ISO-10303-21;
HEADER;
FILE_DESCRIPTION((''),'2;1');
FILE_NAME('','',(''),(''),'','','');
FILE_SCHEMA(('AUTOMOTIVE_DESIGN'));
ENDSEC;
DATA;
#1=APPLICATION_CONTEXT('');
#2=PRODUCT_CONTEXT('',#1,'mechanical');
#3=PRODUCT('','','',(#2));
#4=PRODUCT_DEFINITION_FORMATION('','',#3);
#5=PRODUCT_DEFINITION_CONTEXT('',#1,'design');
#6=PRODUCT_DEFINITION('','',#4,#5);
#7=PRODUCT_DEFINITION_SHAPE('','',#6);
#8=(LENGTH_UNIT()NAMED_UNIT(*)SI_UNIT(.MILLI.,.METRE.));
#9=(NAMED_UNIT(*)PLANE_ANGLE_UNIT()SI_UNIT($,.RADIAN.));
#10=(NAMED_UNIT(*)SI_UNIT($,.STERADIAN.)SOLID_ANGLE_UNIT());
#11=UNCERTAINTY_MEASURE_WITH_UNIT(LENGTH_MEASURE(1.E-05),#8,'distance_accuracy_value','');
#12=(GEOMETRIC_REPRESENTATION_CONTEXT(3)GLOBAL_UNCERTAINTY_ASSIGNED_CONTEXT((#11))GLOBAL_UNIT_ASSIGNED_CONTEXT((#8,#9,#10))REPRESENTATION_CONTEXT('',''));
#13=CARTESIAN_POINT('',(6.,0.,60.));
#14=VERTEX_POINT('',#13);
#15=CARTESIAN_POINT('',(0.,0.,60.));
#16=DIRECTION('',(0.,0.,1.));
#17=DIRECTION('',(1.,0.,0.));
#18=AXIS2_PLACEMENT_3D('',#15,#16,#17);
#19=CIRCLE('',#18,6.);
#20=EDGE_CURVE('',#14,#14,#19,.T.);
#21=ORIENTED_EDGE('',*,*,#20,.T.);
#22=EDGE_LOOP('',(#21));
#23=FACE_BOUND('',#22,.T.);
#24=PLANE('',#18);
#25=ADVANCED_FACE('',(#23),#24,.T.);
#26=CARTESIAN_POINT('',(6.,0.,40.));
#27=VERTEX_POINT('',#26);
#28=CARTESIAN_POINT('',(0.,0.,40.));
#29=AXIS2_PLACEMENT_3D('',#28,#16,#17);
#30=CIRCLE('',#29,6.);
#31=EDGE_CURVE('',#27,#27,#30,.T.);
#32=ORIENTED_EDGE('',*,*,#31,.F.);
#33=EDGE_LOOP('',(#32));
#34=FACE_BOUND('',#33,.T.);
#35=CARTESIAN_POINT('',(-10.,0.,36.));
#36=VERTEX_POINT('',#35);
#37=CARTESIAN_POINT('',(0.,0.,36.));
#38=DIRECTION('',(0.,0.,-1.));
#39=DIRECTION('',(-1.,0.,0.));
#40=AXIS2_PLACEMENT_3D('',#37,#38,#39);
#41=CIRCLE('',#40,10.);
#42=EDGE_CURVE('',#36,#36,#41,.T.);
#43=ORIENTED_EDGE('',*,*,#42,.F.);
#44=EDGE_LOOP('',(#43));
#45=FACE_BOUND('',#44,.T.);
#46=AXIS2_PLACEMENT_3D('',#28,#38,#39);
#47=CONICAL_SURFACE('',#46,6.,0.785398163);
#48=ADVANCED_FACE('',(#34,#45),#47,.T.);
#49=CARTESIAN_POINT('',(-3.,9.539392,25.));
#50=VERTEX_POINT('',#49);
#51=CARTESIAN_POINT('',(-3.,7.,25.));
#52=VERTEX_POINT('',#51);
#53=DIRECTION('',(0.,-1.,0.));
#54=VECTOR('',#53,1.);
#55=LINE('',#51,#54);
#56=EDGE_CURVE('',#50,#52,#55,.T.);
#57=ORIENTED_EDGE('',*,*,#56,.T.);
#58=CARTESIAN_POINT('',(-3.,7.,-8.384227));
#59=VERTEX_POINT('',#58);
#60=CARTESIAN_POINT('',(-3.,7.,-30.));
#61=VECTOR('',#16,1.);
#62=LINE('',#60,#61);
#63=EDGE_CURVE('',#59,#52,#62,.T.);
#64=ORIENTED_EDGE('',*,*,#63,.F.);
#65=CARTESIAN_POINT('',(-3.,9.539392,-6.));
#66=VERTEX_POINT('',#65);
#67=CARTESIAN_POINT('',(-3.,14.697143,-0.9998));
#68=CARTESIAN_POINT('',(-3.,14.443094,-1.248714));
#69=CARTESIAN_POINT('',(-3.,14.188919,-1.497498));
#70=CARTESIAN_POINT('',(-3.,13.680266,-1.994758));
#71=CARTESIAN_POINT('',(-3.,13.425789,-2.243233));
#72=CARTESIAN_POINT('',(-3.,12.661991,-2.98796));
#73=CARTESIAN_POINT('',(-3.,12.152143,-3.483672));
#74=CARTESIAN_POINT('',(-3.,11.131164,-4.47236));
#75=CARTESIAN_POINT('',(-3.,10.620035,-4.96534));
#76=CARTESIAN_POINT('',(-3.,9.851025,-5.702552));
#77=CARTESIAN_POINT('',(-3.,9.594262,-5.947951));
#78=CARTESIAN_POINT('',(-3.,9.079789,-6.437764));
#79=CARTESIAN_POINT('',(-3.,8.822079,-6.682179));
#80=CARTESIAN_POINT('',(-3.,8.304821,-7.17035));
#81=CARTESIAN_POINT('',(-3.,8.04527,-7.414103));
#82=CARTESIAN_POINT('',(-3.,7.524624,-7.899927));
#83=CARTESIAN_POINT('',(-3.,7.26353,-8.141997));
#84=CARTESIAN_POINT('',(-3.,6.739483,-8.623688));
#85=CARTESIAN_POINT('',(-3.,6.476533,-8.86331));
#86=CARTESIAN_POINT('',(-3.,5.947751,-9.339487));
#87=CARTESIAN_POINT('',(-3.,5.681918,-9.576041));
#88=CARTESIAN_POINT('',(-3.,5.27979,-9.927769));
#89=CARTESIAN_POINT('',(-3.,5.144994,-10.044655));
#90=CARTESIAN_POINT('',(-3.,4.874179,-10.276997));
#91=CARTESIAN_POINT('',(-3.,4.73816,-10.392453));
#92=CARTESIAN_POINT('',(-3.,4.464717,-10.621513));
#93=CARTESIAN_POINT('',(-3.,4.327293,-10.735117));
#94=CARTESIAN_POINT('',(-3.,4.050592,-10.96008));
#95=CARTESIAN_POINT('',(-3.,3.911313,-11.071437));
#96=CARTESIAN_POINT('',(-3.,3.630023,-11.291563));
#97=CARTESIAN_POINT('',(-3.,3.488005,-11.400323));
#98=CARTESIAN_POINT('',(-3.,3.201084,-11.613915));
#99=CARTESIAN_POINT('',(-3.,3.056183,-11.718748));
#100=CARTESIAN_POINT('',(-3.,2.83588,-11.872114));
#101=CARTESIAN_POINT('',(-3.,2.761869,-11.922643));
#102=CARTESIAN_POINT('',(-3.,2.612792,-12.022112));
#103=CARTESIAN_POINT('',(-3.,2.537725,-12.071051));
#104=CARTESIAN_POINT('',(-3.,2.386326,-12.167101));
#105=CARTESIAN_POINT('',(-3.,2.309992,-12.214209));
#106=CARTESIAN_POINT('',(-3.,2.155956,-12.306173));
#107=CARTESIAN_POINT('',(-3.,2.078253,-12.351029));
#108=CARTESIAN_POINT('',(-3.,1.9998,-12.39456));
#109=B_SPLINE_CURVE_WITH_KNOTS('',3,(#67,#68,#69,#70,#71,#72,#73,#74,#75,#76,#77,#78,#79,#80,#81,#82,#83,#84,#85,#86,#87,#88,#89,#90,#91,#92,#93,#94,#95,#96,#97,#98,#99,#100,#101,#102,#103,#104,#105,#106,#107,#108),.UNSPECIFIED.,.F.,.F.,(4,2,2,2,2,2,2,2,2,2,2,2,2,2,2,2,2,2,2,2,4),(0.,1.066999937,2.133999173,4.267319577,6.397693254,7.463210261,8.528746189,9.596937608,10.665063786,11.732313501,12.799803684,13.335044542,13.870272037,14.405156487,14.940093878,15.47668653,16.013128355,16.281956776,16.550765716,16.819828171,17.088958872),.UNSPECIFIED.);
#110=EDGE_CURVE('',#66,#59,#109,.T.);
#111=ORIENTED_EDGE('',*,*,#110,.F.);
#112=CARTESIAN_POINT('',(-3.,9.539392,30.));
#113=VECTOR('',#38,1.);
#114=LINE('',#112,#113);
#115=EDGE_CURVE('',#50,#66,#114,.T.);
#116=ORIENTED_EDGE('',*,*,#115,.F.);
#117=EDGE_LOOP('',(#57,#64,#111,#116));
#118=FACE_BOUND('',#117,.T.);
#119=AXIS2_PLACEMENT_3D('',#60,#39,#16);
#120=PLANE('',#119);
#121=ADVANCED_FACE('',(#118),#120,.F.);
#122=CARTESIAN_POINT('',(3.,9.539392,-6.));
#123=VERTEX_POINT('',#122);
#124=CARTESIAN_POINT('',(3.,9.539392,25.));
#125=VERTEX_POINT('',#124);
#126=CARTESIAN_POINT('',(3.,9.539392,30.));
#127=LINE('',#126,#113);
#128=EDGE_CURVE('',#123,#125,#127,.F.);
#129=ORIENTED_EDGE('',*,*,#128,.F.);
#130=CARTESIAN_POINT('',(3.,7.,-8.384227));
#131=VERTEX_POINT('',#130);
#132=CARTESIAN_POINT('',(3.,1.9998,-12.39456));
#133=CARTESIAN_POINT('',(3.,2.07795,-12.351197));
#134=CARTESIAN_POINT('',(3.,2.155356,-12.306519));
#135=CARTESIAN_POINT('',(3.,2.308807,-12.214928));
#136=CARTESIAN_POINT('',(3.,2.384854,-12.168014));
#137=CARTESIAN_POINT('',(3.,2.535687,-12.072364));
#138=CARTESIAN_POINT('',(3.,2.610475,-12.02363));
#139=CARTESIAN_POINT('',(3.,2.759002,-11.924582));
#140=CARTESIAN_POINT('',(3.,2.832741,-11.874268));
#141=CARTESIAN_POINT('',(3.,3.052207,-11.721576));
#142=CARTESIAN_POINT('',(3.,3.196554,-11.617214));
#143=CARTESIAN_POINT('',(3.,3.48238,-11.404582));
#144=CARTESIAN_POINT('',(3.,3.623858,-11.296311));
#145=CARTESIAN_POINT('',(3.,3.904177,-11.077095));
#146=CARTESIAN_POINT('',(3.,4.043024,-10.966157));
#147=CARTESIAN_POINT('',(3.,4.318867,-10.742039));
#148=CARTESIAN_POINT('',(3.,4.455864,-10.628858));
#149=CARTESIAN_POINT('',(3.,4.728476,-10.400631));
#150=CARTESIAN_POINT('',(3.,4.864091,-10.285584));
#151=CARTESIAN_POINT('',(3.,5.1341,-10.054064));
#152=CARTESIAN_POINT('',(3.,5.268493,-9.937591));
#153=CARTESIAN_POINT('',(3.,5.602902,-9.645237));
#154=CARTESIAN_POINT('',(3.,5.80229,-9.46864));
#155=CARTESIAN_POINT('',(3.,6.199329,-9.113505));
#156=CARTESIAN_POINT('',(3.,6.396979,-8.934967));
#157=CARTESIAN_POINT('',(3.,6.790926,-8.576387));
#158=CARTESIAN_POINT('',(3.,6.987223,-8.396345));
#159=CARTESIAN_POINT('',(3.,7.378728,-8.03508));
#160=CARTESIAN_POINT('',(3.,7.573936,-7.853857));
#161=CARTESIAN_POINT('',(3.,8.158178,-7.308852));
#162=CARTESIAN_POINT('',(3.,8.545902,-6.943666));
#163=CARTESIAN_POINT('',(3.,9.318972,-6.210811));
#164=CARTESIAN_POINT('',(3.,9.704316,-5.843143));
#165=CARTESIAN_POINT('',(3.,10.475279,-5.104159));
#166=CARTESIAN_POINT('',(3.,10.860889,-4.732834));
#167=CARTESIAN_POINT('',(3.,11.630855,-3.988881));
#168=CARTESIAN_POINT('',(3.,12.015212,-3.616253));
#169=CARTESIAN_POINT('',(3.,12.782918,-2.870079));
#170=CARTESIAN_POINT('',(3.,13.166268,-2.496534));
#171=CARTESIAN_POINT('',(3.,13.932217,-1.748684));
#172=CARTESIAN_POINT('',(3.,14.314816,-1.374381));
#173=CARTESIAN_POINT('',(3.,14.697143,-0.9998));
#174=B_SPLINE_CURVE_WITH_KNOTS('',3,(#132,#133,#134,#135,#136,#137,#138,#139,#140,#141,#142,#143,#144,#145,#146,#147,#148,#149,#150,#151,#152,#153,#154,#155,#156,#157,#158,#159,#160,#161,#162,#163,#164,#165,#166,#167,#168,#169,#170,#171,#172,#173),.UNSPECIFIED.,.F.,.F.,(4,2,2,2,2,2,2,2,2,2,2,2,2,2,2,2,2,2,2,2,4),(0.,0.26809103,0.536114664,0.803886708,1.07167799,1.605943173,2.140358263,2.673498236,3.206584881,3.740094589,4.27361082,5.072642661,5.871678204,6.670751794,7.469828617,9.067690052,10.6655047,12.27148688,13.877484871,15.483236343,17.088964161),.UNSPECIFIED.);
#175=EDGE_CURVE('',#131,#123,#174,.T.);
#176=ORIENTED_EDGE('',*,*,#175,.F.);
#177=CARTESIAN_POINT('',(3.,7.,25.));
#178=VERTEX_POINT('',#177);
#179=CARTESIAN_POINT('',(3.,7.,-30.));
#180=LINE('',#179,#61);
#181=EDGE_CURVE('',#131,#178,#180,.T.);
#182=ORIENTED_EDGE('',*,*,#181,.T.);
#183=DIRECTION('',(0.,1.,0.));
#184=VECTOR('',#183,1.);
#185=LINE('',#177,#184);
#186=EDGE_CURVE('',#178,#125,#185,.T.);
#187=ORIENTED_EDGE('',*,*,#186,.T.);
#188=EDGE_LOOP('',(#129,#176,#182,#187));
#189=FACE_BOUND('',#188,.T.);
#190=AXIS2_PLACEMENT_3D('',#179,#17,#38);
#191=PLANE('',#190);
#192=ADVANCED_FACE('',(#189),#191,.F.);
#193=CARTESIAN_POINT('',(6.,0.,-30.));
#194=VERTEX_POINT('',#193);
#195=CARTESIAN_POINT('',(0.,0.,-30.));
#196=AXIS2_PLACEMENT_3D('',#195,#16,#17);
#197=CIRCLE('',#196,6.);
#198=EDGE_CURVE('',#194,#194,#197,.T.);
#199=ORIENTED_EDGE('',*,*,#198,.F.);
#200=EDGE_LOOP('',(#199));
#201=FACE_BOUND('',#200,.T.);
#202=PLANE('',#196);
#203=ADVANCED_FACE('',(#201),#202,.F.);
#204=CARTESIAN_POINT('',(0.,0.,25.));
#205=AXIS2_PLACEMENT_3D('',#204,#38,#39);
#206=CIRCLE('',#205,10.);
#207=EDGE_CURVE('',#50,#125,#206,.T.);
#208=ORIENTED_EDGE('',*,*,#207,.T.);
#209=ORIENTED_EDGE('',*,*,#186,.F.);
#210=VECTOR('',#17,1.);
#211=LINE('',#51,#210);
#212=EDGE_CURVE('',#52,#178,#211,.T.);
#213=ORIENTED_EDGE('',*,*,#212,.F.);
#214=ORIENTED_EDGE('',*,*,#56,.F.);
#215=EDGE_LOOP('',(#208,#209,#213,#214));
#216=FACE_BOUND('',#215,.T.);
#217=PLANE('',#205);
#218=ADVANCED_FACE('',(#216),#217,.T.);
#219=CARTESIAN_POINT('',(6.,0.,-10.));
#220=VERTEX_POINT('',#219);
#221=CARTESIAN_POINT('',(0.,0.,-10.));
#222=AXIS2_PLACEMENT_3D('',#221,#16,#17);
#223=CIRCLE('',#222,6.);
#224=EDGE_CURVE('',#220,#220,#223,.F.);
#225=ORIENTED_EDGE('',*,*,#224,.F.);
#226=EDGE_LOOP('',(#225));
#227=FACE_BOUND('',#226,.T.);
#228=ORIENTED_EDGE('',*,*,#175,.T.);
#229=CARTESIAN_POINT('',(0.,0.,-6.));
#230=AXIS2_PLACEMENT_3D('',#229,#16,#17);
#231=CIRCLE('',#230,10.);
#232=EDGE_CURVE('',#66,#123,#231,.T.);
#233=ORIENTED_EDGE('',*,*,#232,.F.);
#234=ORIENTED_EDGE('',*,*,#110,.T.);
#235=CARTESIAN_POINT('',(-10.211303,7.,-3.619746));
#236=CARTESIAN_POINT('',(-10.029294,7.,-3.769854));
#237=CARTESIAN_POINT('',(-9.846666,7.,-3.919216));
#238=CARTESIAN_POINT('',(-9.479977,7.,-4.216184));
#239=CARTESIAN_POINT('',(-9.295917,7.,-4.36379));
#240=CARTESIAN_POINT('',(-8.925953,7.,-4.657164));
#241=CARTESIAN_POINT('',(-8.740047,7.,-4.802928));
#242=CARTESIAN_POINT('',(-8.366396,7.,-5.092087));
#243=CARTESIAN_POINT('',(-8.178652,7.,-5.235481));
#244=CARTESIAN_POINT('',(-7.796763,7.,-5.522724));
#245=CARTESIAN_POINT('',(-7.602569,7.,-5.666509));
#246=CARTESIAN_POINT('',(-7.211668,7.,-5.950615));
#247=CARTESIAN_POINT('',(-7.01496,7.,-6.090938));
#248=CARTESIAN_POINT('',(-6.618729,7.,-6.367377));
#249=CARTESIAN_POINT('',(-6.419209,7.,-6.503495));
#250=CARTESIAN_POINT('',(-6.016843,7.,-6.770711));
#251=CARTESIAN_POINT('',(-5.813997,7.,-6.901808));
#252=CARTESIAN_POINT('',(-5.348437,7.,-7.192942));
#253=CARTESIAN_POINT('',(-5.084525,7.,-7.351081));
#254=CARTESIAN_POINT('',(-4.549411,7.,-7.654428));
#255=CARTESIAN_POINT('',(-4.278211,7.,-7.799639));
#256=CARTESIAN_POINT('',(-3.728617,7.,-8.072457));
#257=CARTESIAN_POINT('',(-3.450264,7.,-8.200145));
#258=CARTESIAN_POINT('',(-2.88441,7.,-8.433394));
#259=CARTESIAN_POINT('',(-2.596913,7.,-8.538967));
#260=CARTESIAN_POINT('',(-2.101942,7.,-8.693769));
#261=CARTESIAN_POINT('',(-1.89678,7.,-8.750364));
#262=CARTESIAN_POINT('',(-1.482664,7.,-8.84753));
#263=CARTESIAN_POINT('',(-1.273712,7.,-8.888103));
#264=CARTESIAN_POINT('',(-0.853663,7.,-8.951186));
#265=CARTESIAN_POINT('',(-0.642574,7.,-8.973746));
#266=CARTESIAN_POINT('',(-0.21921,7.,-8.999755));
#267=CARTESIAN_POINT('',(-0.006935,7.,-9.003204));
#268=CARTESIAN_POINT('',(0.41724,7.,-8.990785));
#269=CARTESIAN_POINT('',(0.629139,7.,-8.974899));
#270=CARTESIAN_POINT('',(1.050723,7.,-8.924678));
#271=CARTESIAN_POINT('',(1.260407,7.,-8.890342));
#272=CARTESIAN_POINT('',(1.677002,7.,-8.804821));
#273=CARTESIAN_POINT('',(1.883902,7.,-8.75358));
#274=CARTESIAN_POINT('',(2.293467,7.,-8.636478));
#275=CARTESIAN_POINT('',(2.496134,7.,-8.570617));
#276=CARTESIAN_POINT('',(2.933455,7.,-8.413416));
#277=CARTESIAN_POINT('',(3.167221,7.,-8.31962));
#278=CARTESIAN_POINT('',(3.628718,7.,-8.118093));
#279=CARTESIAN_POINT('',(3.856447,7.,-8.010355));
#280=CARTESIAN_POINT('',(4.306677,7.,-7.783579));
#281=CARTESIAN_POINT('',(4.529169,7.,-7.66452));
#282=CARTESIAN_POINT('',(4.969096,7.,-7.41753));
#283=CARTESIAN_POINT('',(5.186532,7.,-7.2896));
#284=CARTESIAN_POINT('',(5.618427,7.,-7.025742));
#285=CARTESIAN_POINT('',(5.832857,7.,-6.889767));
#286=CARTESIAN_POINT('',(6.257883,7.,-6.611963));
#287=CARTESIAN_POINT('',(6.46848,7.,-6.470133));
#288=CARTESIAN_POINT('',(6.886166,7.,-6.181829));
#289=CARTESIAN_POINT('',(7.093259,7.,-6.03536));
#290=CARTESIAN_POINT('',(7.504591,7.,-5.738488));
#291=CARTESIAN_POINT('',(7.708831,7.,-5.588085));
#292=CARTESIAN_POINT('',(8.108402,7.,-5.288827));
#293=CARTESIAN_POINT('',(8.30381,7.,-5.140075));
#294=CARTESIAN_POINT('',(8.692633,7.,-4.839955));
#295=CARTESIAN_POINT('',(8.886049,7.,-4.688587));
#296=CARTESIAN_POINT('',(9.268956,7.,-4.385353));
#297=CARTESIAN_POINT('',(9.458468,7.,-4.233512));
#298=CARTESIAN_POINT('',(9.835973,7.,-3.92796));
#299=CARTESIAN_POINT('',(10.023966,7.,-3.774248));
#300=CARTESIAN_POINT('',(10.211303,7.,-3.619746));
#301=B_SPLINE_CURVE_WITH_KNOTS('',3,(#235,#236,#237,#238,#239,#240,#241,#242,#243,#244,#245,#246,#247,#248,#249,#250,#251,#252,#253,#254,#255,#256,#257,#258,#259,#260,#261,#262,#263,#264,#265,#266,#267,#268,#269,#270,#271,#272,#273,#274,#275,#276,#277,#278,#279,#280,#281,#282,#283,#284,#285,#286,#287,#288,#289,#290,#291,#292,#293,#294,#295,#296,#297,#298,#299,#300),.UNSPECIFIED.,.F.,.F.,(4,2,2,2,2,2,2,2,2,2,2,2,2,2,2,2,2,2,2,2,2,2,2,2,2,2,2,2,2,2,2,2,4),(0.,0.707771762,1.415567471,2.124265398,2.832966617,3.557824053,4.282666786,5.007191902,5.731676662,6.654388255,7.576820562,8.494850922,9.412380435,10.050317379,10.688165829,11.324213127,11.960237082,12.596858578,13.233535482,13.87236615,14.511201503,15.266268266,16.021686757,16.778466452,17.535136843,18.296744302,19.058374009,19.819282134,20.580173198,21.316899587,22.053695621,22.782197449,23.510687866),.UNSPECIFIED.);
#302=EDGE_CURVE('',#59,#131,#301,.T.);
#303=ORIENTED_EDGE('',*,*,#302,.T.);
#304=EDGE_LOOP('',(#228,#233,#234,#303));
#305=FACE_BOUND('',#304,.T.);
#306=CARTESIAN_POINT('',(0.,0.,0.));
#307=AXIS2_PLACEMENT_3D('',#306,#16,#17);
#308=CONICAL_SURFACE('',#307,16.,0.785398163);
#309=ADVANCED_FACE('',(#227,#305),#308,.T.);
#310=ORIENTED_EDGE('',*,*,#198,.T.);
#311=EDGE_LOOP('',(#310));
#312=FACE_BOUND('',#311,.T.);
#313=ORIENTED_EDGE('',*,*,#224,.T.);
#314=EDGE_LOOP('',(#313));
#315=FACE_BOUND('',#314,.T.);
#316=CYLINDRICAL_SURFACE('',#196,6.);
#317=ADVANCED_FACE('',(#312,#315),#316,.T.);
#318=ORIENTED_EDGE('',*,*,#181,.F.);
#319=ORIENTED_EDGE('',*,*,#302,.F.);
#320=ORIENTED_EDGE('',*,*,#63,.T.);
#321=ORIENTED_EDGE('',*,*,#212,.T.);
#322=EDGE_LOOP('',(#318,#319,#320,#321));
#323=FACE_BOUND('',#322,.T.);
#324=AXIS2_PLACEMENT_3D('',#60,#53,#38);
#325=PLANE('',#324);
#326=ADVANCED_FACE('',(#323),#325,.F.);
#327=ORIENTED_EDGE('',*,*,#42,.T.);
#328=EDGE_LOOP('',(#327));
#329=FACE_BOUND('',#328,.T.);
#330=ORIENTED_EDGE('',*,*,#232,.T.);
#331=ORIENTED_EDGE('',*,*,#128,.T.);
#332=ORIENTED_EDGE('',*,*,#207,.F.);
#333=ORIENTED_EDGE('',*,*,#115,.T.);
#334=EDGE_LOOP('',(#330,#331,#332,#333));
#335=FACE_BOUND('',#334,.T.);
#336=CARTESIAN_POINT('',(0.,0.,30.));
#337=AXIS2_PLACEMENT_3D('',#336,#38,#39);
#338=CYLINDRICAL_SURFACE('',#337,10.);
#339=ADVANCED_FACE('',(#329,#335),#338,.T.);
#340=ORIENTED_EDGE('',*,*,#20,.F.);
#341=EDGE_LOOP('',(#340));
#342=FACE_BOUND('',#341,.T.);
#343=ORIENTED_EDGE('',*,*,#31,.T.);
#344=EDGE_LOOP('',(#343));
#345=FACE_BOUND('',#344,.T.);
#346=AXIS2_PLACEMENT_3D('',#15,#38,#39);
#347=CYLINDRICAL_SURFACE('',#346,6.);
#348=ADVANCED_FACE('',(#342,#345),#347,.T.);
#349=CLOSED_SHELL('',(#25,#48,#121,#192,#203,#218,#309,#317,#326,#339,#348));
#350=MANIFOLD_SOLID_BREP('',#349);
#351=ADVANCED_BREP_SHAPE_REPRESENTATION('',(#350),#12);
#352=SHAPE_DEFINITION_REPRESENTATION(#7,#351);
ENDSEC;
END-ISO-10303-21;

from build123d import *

# Parameters (mm, degrees)
SKETCH2_R               = 10
BOSS_EXTRUDE1_DEPTH     = 30
SKETCH5_R               = 6
BOSS_EXTRUDE3_DEPTH     = 30
CHAMFER2_SIZE           = 10
CUT_EXTRUDE1_DEPTH      = 25
CUT_EXTRUDE1_DEPTH_BACK = 34.166247904
SKETCH3_W               = 6
SKETCH3_H               = 6
BOSS_EXTRUDE4_START     = 60
SKETCH5_3_R             = 6
BOSS_EXTRUDE4_DEPTH     = 30
CHAMFER3_SIZE           = 10


with BuildPart() as part:
    # Sketch2 → Boss-Extrude1 (new body)
    with BuildSketch(Plane.XY):
        Circle(SKETCH2_R)
    extrude(amount=BOSS_EXTRUDE1_DEPTH)

    # Sketch5 → Boss-Extrude3 (add)
    with BuildSketch(Plane.XY):
        Circle(SKETCH5_R)
    extrude(amount=-BOSS_EXTRUDE3_DEPTH)

    # Chamfer2
    # the kernel refuses this chamfer: 10 mm, written as the material it adds along each edge
    with BuildSketch(Plane(origin=(0, 0, 0), x_dir=(1, 0, 0), z_dir=(0, -1, 0))) as chamfer2_piece_1_section:
        Polygon((6 + CHAMFER2_SIZE, 0), (6, -CHAMFER2_SIZE), (6, 0), align=None)
    chamfer2_piece_1 = revolve(axis=Axis((0, 0, 0), (0, 0, 1)), mode=Mode.PRIVATE)
    chamfer2_piece_1 = chamfer2_piece_1 & Plane(origin=(0, 0, -8.05698811), x_dir=(1, 0, 0), z_dir=(0, 0, -1)) * Cylinder(10, 64, mode=Mode.PRIVATE)
    add(chamfer2_piece_1)

    # Sketch3 → Cut-Extrude1 (cut, two sides: drawn at the far end of the back side and taken through both)
    with BuildSketch(Plane.XY.offset(-CUT_EXTRUDE1_DEPTH_BACK)):
        with Locations((0, 10)):
            Rectangle(SKETCH3_W, SKETCH3_H)
    extrude(amount=CUT_EXTRUDE1_DEPTH + CUT_EXTRUDE1_DEPTH_BACK, mode=Mode.SUBTRACT)

    # Sketch5<3> → Boss-Extrude4 (add)
    with BuildSketch(Plane.XY.offset(BOSS_EXTRUDE4_START)):
        Circle(SKETCH5_3_R)
    extrude(amount=-BOSS_EXTRUDE4_DEPTH)

    # Chamfer3
    # the kernel refuses this chamfer: 10 mm, written as the material it adds along each edge
    with BuildSketch(Plane(origin=(0, 0, 30), x_dir=(1, 0, 0), z_dir=(0, -1, 0))) as chamfer3_piece_1_section:
        Polygon((6 + CHAMFER3_SIZE, 0), (6, CHAMFER3_SIZE), (6, 0), align=None)
    chamfer3_piece_1 = revolve(axis=Axis((0, 0, 30), (0, 0, 1)), mode=Mode.PRIVATE)
    chamfer3_piece_1 = chamfer3_piece_1 & Plane(origin=(0, 0, 38.05698811), x_dir=(1, 0, 0), z_dir=(0, 0, -1)) * Cylinder(10, 64, mode=Mode.PRIVATE)
    add(chamfer3_piece_1)


solid = part.part
